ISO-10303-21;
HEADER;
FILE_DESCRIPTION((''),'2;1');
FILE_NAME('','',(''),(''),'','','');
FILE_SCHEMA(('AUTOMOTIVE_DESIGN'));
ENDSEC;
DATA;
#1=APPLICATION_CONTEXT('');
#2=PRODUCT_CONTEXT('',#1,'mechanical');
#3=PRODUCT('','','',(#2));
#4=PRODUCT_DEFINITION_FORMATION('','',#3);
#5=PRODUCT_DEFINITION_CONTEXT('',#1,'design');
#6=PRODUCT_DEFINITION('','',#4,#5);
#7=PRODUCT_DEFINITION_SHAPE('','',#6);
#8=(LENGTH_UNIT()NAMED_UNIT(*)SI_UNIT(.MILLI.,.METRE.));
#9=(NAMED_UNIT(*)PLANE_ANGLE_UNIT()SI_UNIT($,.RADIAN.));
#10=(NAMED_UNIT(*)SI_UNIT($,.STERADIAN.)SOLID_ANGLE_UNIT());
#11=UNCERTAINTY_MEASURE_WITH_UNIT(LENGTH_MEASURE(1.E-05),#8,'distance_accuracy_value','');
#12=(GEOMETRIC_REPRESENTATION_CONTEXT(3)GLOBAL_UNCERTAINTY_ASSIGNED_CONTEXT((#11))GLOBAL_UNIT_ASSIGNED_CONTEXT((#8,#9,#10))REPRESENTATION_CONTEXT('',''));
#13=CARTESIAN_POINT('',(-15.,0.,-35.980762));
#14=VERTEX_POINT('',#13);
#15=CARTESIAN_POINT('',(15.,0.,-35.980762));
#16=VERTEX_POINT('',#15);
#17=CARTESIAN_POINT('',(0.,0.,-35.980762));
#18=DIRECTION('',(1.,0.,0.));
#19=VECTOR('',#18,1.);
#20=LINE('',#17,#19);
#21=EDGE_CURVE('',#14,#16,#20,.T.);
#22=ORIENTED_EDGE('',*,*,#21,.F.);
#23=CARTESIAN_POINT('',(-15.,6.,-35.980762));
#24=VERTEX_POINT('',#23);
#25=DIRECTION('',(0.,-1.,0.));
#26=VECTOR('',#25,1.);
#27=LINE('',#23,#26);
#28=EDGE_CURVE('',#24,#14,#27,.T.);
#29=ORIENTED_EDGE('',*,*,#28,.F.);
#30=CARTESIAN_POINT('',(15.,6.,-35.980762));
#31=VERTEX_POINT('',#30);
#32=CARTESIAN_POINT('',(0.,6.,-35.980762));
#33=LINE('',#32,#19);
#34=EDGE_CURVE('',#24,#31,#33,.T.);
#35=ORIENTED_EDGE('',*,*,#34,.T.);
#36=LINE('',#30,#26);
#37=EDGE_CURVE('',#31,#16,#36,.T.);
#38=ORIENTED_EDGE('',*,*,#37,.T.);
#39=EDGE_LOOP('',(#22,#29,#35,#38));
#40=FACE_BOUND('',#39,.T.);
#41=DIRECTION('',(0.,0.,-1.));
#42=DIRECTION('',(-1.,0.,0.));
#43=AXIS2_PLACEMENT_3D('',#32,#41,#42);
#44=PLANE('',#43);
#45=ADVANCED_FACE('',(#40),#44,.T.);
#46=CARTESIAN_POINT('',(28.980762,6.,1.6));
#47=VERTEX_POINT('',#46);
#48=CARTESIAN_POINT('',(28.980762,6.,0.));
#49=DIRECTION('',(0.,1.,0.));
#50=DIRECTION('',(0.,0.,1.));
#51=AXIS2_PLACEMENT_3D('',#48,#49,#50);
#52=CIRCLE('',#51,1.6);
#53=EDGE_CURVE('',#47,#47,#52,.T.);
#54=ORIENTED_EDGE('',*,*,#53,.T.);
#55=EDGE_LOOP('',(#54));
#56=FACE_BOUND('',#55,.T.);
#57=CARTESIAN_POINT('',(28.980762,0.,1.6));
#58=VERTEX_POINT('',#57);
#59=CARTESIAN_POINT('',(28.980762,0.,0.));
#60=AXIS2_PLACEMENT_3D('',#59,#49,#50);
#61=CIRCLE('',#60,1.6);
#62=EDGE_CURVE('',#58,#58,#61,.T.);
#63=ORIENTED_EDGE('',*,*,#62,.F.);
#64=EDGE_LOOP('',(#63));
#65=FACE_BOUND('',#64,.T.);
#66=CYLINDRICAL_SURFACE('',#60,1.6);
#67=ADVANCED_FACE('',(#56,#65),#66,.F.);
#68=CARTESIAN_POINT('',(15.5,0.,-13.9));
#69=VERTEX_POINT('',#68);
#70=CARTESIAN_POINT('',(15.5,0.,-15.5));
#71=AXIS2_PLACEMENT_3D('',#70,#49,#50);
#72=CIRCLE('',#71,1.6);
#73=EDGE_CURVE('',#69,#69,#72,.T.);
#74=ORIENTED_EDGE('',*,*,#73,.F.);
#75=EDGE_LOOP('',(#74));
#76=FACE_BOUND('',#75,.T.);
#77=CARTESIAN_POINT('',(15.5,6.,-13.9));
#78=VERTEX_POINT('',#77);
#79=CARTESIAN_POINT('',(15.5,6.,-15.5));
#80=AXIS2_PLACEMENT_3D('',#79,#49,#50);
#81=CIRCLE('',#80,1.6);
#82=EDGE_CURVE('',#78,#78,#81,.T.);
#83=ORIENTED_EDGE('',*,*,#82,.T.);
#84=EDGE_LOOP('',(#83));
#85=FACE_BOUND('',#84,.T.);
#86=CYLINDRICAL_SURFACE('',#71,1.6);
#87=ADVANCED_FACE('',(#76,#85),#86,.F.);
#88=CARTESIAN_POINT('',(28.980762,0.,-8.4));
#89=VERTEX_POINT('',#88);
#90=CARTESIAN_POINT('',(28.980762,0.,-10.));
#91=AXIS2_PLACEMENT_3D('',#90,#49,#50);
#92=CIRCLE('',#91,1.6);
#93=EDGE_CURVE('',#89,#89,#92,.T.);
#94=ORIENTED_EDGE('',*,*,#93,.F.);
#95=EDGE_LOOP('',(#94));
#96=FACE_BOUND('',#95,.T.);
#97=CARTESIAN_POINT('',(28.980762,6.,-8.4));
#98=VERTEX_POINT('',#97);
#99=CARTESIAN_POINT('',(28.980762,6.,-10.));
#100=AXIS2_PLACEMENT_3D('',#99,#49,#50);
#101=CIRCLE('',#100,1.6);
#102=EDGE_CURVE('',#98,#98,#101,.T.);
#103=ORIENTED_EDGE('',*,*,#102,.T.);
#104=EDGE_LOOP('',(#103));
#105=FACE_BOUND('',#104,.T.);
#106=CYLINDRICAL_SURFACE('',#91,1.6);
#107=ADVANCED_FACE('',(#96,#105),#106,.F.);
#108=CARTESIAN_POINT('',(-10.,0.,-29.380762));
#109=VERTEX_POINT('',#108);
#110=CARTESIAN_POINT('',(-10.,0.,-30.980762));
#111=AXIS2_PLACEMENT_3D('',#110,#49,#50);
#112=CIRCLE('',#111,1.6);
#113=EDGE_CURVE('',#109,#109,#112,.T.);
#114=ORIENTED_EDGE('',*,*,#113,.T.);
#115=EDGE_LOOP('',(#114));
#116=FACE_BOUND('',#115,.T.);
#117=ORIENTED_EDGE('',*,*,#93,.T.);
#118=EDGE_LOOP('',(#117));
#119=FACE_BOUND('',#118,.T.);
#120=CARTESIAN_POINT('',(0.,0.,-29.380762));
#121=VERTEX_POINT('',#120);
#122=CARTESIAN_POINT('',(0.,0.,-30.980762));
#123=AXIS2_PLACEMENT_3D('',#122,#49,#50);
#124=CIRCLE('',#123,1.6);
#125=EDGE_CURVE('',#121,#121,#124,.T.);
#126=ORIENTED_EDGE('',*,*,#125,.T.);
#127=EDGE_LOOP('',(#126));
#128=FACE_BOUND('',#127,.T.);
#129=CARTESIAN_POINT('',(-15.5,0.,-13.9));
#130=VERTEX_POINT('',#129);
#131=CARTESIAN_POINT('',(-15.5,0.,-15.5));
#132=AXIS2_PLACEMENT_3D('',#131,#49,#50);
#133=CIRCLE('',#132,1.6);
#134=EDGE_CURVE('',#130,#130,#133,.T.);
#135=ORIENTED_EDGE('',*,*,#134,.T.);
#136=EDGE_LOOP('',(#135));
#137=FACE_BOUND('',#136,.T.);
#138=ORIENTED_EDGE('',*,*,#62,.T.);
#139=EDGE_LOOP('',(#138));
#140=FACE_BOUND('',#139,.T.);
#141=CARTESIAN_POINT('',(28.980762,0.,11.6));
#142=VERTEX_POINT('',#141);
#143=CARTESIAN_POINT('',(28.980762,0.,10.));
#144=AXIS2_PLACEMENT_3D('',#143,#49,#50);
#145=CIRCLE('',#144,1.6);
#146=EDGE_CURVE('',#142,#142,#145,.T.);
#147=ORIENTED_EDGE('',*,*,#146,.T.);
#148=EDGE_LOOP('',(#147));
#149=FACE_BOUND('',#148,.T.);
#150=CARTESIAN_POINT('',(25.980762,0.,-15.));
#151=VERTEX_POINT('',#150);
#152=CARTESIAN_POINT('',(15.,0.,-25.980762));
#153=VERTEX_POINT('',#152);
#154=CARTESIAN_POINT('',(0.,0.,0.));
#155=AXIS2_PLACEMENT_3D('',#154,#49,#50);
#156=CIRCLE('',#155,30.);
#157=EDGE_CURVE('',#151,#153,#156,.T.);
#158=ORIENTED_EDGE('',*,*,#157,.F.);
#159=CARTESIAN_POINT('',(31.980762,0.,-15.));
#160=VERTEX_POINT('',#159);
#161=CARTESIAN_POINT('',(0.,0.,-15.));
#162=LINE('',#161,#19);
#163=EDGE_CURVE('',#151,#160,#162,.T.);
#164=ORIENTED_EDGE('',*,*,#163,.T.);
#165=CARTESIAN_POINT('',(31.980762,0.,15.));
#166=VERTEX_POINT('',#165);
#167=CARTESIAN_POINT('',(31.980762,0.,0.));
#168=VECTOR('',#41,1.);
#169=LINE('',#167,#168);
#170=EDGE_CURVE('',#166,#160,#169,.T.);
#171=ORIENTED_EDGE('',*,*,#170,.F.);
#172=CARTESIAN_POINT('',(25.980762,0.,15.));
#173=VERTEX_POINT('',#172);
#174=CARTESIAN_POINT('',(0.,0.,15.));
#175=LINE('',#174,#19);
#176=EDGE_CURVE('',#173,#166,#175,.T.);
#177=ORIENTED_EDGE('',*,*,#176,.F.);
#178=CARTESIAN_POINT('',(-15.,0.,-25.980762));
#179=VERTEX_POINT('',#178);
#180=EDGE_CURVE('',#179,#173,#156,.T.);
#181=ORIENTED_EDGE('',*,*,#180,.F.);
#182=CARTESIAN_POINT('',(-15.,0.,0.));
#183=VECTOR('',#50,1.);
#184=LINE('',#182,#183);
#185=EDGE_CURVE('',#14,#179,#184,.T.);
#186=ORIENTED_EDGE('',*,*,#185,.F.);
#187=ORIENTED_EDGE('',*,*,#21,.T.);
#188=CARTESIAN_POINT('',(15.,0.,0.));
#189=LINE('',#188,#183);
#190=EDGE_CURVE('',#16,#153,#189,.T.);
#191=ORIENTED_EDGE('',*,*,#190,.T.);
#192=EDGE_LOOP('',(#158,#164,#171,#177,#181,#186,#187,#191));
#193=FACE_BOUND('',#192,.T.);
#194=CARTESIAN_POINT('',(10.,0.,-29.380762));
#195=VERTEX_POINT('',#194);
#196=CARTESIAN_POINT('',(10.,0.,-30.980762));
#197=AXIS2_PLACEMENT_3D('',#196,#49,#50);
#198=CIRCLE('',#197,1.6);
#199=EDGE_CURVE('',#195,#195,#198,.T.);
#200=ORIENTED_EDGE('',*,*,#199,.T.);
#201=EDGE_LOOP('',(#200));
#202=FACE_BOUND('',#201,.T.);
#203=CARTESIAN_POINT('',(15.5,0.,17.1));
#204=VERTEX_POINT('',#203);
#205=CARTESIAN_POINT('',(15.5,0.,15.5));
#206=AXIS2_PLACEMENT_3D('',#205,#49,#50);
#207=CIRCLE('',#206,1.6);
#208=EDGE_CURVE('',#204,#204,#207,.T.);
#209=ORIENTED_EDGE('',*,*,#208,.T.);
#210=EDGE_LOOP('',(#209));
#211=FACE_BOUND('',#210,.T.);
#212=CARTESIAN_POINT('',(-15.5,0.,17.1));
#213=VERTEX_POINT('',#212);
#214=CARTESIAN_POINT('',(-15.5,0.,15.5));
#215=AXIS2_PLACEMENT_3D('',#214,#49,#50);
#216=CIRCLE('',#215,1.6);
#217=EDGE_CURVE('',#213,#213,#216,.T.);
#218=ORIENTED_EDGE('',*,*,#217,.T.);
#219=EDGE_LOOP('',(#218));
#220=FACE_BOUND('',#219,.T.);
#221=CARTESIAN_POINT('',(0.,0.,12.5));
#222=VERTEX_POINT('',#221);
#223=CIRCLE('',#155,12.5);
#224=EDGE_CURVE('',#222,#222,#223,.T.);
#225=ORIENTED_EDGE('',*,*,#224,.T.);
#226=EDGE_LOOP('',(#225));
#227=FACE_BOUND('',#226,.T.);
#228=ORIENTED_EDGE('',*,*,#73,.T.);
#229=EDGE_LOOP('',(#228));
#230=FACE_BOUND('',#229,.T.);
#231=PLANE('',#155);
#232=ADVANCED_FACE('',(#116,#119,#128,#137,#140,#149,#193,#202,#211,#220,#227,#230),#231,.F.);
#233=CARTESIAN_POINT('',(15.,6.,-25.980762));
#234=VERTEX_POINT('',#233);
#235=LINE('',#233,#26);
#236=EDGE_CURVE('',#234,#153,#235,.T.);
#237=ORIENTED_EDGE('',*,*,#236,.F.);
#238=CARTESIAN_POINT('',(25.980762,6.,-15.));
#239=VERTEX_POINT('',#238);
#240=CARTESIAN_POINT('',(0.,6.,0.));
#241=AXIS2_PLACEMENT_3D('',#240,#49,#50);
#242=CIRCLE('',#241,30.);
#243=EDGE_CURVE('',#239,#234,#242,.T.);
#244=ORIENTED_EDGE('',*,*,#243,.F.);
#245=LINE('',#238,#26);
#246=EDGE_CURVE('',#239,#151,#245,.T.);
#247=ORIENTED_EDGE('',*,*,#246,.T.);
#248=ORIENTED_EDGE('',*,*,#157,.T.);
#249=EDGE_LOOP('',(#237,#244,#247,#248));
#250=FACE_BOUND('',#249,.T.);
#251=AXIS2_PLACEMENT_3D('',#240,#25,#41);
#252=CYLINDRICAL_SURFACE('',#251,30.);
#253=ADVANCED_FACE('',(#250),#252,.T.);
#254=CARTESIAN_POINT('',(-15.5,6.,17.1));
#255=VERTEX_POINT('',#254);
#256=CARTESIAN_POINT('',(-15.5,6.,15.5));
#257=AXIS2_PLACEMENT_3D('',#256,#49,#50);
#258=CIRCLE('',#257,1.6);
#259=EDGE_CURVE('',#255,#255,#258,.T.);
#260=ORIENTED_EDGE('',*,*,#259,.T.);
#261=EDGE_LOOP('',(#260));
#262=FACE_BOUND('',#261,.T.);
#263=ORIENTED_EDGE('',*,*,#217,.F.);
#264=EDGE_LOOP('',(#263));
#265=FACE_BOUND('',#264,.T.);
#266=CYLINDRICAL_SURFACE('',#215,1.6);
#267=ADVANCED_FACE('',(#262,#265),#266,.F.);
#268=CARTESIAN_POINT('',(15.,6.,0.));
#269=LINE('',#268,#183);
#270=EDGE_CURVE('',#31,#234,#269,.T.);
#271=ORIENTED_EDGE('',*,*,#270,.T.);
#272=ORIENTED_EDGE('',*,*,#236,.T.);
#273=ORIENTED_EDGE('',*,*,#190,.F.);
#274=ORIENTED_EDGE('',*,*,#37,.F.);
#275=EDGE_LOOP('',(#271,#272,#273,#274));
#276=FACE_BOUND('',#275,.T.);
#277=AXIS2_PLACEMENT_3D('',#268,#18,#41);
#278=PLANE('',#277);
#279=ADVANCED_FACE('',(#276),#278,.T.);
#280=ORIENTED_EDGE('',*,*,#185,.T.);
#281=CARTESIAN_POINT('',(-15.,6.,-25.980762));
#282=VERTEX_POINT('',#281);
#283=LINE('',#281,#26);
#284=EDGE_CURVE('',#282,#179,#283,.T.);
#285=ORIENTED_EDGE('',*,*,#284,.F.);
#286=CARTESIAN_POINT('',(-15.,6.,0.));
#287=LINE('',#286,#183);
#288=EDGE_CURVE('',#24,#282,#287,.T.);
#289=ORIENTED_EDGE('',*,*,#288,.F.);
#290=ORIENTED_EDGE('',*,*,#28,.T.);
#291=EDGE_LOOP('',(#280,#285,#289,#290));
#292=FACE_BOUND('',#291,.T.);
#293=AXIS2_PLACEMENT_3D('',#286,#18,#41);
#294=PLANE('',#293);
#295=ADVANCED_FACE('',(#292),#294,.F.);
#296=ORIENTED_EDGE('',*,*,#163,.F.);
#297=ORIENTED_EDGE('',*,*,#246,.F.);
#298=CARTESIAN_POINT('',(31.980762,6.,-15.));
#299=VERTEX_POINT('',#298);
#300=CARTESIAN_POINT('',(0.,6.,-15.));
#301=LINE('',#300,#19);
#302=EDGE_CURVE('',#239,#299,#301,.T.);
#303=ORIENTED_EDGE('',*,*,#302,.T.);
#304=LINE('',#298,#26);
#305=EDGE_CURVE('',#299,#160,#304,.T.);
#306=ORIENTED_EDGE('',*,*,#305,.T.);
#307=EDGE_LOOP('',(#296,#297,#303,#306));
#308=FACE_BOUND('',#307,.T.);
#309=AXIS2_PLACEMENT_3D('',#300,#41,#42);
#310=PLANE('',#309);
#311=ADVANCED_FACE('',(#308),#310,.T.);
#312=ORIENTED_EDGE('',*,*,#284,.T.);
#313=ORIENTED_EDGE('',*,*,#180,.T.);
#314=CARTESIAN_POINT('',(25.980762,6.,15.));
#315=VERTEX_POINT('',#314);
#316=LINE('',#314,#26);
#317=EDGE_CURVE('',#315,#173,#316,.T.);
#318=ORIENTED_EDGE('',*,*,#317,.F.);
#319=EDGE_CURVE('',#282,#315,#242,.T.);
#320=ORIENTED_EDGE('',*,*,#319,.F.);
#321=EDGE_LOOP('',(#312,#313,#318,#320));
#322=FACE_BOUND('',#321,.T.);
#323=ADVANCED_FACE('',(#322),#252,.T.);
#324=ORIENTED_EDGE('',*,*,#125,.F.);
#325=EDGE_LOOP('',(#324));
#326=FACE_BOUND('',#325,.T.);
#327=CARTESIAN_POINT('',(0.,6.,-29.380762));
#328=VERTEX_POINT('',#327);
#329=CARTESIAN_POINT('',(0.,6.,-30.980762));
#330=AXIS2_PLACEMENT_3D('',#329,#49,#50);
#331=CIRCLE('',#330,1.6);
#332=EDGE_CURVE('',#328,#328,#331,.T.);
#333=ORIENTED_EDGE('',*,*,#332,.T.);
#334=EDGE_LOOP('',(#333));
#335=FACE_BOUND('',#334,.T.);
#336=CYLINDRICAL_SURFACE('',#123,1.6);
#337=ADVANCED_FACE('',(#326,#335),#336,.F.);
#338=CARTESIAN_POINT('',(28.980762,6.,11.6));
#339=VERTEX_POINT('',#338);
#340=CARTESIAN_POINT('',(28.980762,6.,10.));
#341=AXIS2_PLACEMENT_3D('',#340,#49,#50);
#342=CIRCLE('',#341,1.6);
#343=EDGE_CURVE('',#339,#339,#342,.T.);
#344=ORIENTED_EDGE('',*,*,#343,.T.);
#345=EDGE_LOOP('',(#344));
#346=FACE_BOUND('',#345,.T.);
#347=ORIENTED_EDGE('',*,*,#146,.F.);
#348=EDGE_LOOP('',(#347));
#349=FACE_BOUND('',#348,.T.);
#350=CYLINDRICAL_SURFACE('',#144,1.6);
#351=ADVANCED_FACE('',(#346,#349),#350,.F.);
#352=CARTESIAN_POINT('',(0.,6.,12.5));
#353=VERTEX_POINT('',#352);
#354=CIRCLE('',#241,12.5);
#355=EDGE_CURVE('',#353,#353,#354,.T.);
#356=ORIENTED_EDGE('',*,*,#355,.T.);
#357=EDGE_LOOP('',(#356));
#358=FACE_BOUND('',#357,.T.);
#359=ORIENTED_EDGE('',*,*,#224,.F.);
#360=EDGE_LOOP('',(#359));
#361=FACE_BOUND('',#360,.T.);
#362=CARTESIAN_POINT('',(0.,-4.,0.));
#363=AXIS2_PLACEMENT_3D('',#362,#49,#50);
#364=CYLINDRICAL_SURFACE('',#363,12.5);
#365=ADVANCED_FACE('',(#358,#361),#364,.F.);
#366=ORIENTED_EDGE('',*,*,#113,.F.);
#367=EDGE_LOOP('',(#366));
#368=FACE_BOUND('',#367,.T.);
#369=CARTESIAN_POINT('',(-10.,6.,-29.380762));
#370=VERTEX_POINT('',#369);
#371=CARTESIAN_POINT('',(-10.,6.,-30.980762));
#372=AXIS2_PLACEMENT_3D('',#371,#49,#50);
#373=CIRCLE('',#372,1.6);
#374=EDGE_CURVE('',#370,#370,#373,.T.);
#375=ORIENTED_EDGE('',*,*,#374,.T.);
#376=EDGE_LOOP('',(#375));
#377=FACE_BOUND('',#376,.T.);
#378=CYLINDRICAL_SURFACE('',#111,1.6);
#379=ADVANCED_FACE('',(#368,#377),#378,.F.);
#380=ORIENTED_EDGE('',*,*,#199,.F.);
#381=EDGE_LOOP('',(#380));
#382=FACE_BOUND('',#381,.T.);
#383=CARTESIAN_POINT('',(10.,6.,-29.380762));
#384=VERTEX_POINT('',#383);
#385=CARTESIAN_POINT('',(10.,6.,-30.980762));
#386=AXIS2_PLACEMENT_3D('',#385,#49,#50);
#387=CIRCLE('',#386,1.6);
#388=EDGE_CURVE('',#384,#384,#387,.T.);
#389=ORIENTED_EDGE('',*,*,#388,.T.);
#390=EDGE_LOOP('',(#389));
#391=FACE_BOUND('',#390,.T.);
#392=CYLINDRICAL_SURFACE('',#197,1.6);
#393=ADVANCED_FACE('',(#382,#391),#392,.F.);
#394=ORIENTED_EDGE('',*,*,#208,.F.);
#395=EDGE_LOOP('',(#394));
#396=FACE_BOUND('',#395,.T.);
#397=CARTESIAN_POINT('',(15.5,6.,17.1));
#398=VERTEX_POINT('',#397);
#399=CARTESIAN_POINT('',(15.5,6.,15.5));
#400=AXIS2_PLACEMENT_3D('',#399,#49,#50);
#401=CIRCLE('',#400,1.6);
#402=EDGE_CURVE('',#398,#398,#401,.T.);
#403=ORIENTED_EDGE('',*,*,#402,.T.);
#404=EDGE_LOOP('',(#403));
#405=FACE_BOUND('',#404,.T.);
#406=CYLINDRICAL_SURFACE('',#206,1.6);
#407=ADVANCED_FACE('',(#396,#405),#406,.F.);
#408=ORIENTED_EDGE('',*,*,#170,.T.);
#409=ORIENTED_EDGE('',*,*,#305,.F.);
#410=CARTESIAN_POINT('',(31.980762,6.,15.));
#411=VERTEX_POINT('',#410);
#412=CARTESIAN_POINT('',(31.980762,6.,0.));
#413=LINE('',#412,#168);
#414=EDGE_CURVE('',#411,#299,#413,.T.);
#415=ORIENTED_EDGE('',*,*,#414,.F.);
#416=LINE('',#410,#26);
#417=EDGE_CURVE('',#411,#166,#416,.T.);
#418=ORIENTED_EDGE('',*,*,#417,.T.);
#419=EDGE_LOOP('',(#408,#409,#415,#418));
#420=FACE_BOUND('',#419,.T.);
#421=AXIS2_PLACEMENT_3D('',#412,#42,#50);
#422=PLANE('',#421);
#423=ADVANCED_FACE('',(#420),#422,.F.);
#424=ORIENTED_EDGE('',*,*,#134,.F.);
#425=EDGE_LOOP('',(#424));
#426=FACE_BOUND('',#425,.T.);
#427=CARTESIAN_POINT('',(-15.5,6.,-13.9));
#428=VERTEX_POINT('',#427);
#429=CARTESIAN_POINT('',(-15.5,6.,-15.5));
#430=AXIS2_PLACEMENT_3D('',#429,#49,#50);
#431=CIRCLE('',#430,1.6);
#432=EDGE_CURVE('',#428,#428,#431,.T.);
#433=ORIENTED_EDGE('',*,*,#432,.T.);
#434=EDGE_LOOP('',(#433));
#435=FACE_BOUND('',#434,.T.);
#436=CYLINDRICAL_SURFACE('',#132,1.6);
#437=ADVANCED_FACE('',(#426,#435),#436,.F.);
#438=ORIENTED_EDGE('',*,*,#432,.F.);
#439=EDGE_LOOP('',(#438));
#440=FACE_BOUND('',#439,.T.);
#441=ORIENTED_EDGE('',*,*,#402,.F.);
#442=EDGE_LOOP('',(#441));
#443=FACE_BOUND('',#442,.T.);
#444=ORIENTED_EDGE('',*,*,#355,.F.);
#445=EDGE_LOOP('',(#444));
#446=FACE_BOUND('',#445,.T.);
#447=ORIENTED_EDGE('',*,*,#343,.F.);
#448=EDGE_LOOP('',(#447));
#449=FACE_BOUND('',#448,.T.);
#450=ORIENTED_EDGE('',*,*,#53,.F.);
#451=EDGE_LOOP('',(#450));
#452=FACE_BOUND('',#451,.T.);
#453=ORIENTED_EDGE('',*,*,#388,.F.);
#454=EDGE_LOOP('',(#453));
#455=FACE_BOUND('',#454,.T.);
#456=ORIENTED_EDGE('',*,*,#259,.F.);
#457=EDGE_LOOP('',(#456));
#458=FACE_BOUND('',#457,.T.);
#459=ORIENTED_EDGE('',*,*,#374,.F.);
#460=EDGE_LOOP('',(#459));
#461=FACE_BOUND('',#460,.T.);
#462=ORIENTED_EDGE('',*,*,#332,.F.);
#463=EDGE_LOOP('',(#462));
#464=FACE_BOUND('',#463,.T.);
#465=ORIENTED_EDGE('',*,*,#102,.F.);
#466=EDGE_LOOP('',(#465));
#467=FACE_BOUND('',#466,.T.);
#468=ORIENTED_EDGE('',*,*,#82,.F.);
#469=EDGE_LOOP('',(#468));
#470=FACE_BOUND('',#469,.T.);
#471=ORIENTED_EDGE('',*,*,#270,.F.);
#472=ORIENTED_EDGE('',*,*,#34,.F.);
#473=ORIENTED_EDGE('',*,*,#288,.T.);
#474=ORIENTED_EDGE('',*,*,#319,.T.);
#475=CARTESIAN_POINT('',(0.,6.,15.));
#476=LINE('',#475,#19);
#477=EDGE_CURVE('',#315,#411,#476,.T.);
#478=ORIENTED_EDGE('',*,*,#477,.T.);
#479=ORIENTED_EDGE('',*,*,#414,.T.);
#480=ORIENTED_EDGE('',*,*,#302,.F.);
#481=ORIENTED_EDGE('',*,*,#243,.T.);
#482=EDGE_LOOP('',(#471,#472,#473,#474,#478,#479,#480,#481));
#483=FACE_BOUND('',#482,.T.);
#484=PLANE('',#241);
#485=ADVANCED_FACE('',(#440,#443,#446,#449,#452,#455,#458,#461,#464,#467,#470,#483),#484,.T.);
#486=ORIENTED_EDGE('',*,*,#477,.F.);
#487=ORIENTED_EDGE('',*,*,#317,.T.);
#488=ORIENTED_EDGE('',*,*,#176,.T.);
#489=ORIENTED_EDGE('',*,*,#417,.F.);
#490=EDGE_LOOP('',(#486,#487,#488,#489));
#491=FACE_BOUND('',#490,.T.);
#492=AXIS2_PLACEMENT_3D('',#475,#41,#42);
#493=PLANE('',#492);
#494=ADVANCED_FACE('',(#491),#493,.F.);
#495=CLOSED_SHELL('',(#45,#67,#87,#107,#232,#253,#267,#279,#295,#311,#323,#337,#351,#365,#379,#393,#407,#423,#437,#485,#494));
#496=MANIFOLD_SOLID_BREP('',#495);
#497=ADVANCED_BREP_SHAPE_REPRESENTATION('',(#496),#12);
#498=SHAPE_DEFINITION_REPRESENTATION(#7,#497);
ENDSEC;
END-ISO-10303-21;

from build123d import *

# Parameters (mm, degrees)
EXTRUDE_1_DEPTH     = 6
SKETCH_2_R          = 1.6
CUT_EXTRUDE_1_DEPTH = 6
SKETCH_3_R          = 12.5
CUT_EXTRUDE_2_DEPTH = 10


# Read off the part's stored shape, not the designer's step: 凸台-拉伸1
with BuildPart() as part:
    # 凸台-拉伸1 outline → 凸台-拉伸1 (new body)
    with BuildSketch(Plane(origin=(0, 0, 0), x_dir=(1, 0, 0), z_dir=(0, 1, 0))):
        with BuildLine():
            ThreePointArc((-15, 25.980762114), (-21.213203436, -21.213203436), (25.980762114, -15))
            Line((25.980762114, -15), (31.980762114, -15))
            Line((31.980762114, -15), (31.980762114, 15))
            Line((31.980762114, 15), (25.980762114, 15))
            ThreePointArc((25.980762114, 15), (21.213203436, 21.213203436), (15, 25.980762114))
            Line((15, 25.980762114), (15, 35.980762114))
            Line((15, 35.980762114), (-15, 35.980762114))
            Line((-15, 35.980762114), (-15, 25.980762114))
        make_face()
    extrude(amount=EXTRUDE_1_DEPTH)

    # 草图2 → 切除-拉伸1 (cut)
    with BuildSketch(Plane(origin=(0, 6, 0), x_dir=(1, 0, 0), z_dir=(0, 1, 0))):
        with Locations(Location((28.980762114, 10, 0), (0, 0, 270))):
            Circle(SKETCH_2_R)
        with Locations(Location((-15.5, 15.5, 0), (0, 0, 270))):
            Circle(SKETCH_2_R)
        with Locations(Location((15.5, 15.5, 0), (0, 0, 270))):
            Circle(SKETCH_2_R)
        with Locations(Location((-15.5, -15.5, 0), (0, 0, 270))):
            Circle(SKETCH_2_R)
        with Locations(Location((15.5, -15.5, 0), (0, 0, 270))):
            Circle(SKETCH_2_R)
        with Locations(Location((28.980762114, 0, 0), (0, 0, 270))):
            Circle(SKETCH_2_R)
        with Locations(Location((28.980762114, -10, 0), (0, 0, 270))):
            Circle(SKETCH_2_R)
        with Locations(Location((-10, 30.980762114, 0), (0, 0, 270))):
            Circle(SKETCH_2_R)
        with Locations(Location((0, 30.980762114, 0), (0, 0, 270))):
            Circle(SKETCH_2_R)
        with Locations(Location((10, 30.980762114, 0), (0, 0, 270))):
            Circle(SKETCH_2_R)
    extrude(amount=-CUT_EXTRUDE_1_DEPTH, mode=Mode.SUBTRACT)

    # 草图3 → 切除-拉伸2 (cut)
    with BuildSketch(Plane(origin=(0, 6, 0), x_dir=(1, 0, 0), z_dir=(0, 1, 0))):
        with Locations(Location((0, 0, 0), (0, 0, 270))):
            Circle(SKETCH_3_R)
    extrude(amount=-CUT_EXTRUDE_2_DEPTH, mode=Mode.SUBTRACT)


solid = part.part
